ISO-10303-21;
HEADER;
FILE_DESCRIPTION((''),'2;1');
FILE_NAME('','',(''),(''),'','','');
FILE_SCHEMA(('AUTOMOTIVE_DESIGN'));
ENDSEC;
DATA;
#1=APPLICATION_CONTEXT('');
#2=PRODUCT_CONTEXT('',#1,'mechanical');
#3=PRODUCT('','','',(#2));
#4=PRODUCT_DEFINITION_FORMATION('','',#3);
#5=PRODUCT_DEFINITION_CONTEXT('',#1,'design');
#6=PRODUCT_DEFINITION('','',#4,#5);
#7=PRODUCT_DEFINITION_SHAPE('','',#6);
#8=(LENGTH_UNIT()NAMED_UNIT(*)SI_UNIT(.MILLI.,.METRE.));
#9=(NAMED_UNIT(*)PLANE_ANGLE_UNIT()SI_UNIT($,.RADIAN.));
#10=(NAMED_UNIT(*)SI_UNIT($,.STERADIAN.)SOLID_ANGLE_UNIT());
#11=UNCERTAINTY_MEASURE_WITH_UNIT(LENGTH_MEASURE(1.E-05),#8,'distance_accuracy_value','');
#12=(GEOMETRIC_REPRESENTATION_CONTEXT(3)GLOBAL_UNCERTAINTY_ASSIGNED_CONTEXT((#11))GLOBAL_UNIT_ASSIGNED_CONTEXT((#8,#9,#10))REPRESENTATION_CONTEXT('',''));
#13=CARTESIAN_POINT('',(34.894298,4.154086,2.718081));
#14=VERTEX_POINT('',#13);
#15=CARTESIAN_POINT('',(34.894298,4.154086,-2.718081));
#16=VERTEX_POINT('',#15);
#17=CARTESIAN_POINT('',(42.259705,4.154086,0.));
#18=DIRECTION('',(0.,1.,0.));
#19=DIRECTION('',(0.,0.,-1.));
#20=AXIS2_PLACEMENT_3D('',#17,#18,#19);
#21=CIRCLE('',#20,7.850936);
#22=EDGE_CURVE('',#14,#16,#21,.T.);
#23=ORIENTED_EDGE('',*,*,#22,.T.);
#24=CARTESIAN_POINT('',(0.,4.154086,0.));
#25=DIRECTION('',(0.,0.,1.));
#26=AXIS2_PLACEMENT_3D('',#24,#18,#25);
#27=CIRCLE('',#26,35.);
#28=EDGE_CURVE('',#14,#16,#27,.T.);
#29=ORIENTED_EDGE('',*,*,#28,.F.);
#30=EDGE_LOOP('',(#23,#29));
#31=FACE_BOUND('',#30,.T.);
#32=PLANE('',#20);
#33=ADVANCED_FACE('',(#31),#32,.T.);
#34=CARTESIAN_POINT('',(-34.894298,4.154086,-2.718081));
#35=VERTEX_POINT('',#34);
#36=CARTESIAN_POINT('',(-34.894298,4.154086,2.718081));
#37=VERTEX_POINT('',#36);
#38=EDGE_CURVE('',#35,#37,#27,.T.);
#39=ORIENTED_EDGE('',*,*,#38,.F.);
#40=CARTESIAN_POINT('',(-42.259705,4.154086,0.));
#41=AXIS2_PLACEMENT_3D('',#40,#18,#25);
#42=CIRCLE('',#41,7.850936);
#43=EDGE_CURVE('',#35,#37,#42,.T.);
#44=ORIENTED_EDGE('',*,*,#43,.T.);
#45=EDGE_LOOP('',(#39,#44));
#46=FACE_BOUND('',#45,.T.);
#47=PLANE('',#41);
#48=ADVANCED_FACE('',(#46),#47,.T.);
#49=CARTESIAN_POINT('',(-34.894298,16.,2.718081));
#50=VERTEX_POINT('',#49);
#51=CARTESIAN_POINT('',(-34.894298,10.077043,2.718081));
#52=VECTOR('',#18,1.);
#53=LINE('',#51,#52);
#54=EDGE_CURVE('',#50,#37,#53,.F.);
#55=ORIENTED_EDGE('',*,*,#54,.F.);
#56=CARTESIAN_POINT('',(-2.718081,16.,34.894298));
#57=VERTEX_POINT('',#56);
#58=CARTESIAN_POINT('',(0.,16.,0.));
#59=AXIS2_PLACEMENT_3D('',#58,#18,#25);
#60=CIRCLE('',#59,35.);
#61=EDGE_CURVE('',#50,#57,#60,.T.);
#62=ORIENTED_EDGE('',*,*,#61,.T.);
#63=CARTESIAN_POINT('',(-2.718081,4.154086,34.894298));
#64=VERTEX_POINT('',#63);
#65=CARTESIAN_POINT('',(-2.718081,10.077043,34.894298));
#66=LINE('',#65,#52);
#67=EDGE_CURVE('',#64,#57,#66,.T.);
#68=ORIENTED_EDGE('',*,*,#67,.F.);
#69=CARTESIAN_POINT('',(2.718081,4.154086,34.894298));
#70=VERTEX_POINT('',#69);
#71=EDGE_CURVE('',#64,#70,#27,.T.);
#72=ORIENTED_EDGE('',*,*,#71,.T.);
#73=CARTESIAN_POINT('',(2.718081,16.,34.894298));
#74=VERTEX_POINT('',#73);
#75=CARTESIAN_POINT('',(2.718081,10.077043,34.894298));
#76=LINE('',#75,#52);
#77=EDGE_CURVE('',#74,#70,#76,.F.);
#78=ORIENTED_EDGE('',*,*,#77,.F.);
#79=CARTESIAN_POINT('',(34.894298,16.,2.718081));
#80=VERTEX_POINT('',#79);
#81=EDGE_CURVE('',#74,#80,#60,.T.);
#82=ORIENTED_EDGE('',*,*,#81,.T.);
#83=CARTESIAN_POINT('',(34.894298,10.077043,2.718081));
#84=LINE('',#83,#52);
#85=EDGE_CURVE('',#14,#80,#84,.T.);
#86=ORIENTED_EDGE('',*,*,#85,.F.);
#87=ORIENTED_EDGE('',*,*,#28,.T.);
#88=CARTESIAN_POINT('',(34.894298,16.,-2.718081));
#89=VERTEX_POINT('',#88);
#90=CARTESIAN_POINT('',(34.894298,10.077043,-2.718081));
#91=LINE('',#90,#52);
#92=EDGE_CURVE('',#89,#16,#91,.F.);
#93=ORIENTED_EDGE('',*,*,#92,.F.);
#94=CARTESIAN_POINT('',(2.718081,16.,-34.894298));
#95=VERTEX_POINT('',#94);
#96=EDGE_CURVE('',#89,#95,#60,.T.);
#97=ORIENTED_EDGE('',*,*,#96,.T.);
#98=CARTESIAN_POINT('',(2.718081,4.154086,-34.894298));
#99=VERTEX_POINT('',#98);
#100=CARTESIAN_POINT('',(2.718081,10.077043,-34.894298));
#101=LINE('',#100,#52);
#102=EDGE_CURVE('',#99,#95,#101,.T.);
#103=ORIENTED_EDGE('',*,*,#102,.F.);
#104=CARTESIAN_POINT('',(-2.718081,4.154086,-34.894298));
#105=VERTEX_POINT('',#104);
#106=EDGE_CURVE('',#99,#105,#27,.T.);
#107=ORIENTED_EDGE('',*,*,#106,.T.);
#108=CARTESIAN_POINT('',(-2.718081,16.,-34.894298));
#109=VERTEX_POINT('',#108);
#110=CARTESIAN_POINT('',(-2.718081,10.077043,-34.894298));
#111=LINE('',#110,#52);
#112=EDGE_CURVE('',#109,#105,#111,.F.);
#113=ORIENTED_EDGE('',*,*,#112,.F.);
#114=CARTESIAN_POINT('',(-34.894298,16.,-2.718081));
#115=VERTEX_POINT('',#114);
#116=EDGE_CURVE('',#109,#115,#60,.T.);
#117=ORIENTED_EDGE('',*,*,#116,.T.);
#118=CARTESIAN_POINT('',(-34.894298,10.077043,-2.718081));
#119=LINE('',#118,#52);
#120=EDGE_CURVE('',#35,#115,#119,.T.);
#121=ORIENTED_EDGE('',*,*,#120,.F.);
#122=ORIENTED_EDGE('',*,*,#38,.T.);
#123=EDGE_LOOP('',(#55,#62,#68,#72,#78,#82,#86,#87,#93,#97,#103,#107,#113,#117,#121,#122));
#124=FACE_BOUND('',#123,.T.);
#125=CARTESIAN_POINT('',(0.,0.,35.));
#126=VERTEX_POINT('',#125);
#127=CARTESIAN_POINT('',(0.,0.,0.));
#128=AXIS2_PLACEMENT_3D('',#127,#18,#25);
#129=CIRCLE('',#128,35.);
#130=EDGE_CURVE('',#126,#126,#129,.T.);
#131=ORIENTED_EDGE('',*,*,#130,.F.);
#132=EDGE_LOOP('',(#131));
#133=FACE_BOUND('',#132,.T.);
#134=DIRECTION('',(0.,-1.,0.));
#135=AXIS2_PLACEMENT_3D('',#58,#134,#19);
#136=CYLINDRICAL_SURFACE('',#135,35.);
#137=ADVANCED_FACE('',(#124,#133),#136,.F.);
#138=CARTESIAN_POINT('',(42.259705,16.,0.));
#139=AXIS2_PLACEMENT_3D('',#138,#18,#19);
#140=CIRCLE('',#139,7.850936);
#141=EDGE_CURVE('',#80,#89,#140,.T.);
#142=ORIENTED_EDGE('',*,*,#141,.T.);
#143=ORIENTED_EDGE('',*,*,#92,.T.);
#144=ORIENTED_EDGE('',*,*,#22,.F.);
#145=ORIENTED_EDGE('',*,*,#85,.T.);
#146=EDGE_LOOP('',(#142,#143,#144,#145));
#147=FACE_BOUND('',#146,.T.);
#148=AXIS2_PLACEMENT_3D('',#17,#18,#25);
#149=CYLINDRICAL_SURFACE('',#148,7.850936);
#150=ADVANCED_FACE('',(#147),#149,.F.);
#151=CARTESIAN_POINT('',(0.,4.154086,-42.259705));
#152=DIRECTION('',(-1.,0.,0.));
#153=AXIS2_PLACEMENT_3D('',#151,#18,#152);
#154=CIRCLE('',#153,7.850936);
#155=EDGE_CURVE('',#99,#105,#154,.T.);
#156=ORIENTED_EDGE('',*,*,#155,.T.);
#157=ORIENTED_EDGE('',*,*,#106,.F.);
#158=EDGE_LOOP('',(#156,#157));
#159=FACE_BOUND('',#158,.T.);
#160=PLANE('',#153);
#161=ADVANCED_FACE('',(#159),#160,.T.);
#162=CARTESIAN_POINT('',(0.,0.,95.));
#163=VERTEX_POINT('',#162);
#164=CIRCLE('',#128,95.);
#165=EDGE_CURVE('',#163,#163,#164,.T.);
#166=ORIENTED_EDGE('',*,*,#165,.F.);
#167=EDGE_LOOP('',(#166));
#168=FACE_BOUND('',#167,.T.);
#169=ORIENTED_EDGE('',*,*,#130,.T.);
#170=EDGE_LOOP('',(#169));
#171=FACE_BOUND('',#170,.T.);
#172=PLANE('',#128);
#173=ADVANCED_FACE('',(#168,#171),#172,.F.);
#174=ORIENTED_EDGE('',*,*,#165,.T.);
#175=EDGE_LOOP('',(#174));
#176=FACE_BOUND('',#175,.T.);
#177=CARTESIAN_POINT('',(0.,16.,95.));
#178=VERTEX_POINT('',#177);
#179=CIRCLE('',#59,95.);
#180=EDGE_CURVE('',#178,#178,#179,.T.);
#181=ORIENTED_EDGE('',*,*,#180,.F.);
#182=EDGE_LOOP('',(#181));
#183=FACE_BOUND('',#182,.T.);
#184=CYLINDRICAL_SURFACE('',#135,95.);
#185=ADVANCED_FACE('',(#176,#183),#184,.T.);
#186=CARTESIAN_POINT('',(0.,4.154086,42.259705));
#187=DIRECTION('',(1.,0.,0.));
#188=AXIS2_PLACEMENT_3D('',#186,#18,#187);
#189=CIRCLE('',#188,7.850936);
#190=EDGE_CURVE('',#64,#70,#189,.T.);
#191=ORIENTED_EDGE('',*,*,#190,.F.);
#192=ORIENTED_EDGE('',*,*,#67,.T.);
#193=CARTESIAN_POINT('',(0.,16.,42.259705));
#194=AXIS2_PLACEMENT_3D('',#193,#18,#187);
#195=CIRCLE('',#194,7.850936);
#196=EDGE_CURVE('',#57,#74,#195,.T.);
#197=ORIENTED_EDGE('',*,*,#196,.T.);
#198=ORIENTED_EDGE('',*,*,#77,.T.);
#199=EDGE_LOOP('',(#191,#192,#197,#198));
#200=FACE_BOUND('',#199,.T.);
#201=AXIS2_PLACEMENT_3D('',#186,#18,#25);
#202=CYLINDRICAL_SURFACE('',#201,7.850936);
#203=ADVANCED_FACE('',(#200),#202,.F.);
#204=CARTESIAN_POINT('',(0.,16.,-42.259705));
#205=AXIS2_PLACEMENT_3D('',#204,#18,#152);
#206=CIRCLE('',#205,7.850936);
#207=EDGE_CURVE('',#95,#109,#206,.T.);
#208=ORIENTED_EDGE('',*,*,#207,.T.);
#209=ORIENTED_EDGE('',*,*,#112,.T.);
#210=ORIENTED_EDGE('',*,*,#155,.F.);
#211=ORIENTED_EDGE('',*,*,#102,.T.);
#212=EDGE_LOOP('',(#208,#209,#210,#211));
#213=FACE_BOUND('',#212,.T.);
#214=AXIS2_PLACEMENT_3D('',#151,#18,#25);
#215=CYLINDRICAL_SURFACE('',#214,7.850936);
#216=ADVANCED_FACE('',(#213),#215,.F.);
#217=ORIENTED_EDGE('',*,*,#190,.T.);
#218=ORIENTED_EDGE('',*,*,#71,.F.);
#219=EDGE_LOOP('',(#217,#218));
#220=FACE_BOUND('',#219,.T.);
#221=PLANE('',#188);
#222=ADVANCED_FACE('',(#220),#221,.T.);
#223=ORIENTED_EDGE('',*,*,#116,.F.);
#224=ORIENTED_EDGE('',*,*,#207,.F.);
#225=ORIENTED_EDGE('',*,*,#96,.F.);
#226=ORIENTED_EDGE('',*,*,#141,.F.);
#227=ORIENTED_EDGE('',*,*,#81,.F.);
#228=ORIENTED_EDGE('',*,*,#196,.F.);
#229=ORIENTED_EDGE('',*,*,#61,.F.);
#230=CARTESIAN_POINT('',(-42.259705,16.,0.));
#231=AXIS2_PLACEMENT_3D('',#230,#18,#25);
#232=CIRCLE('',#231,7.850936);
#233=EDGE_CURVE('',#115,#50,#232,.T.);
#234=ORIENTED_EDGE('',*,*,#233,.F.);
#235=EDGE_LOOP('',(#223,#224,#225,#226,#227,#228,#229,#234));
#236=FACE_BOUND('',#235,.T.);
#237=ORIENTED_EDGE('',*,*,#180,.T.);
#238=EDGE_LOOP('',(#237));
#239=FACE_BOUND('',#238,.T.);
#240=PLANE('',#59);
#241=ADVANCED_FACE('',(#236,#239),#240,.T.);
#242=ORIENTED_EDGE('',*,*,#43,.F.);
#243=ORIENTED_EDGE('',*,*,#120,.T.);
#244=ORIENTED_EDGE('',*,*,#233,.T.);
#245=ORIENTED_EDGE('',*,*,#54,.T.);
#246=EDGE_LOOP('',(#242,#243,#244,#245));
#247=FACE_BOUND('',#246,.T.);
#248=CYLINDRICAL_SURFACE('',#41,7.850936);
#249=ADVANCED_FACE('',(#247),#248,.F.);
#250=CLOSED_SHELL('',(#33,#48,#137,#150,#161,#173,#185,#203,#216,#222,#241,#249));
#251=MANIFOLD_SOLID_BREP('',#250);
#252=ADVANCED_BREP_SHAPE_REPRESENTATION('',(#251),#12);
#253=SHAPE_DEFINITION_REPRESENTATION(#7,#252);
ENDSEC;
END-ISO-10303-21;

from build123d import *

# Parameters (mm, degrees)
SKETCH1_R           = 95
BOSS_EXTRUDE1_DEPTH = 16
SKETCH2_R           = 35
CUT_EXTRUDE1_DEPTH  = 136.299667405
SKETCH3_R           = 7.850935583
CUT_EXTRUDE2_DEPTH  = 11.845913684
CIRPATTERN1_COUNT   = 4


with BuildPart() as part:
    # Sketch1 → Boss-Extrude1 (new body)
    with BuildSketch(Plane(origin=(0, 0, 0), x_dir=(1, 0, 0), z_dir=(0, 1, 0))):
        Circle(SKETCH1_R)
    extrude(amount=BOSS_EXTRUDE1_DEPTH)

    # Sketch2 → Cut-Extrude1 (cut, through all)
    with BuildSketch(Plane(origin=(0, 0, 0), x_dir=(1, 0, 0), z_dir=(0, 1, 0))):
        Circle(SKETCH2_R)
    extrude(amount=CUT_EXTRUDE1_DEPTH, mode=Mode.SUBTRACT)

    # Sketch3 → Cut-Extrude2 (cut)
    with BuildSketch(Plane(origin=(0, 16, 0), x_dir=(1, 0, 0), z_dir=(0, 1, 0))):
        with Locations((-42.259705449, 0)):
            Circle(SKETCH3_R)
    cut_extrude2 = extrude(amount=-CUT_EXTRUDE2_DEPTH, mode=Mode.SUBTRACT)

    # CirPattern1: Cut-Extrude2 ×4 about axis
    cirpattern1_axis = Axis((0, 0, 0), (0, 1, 0))
    for i in range(1, CIRPATTERN1_COUNT):
        add(cut_extrude2.rotate(cirpattern1_axis, i * 360 / CIRPATTERN1_COUNT), mode=Mode.SUBTRACT)


solid = part.part
